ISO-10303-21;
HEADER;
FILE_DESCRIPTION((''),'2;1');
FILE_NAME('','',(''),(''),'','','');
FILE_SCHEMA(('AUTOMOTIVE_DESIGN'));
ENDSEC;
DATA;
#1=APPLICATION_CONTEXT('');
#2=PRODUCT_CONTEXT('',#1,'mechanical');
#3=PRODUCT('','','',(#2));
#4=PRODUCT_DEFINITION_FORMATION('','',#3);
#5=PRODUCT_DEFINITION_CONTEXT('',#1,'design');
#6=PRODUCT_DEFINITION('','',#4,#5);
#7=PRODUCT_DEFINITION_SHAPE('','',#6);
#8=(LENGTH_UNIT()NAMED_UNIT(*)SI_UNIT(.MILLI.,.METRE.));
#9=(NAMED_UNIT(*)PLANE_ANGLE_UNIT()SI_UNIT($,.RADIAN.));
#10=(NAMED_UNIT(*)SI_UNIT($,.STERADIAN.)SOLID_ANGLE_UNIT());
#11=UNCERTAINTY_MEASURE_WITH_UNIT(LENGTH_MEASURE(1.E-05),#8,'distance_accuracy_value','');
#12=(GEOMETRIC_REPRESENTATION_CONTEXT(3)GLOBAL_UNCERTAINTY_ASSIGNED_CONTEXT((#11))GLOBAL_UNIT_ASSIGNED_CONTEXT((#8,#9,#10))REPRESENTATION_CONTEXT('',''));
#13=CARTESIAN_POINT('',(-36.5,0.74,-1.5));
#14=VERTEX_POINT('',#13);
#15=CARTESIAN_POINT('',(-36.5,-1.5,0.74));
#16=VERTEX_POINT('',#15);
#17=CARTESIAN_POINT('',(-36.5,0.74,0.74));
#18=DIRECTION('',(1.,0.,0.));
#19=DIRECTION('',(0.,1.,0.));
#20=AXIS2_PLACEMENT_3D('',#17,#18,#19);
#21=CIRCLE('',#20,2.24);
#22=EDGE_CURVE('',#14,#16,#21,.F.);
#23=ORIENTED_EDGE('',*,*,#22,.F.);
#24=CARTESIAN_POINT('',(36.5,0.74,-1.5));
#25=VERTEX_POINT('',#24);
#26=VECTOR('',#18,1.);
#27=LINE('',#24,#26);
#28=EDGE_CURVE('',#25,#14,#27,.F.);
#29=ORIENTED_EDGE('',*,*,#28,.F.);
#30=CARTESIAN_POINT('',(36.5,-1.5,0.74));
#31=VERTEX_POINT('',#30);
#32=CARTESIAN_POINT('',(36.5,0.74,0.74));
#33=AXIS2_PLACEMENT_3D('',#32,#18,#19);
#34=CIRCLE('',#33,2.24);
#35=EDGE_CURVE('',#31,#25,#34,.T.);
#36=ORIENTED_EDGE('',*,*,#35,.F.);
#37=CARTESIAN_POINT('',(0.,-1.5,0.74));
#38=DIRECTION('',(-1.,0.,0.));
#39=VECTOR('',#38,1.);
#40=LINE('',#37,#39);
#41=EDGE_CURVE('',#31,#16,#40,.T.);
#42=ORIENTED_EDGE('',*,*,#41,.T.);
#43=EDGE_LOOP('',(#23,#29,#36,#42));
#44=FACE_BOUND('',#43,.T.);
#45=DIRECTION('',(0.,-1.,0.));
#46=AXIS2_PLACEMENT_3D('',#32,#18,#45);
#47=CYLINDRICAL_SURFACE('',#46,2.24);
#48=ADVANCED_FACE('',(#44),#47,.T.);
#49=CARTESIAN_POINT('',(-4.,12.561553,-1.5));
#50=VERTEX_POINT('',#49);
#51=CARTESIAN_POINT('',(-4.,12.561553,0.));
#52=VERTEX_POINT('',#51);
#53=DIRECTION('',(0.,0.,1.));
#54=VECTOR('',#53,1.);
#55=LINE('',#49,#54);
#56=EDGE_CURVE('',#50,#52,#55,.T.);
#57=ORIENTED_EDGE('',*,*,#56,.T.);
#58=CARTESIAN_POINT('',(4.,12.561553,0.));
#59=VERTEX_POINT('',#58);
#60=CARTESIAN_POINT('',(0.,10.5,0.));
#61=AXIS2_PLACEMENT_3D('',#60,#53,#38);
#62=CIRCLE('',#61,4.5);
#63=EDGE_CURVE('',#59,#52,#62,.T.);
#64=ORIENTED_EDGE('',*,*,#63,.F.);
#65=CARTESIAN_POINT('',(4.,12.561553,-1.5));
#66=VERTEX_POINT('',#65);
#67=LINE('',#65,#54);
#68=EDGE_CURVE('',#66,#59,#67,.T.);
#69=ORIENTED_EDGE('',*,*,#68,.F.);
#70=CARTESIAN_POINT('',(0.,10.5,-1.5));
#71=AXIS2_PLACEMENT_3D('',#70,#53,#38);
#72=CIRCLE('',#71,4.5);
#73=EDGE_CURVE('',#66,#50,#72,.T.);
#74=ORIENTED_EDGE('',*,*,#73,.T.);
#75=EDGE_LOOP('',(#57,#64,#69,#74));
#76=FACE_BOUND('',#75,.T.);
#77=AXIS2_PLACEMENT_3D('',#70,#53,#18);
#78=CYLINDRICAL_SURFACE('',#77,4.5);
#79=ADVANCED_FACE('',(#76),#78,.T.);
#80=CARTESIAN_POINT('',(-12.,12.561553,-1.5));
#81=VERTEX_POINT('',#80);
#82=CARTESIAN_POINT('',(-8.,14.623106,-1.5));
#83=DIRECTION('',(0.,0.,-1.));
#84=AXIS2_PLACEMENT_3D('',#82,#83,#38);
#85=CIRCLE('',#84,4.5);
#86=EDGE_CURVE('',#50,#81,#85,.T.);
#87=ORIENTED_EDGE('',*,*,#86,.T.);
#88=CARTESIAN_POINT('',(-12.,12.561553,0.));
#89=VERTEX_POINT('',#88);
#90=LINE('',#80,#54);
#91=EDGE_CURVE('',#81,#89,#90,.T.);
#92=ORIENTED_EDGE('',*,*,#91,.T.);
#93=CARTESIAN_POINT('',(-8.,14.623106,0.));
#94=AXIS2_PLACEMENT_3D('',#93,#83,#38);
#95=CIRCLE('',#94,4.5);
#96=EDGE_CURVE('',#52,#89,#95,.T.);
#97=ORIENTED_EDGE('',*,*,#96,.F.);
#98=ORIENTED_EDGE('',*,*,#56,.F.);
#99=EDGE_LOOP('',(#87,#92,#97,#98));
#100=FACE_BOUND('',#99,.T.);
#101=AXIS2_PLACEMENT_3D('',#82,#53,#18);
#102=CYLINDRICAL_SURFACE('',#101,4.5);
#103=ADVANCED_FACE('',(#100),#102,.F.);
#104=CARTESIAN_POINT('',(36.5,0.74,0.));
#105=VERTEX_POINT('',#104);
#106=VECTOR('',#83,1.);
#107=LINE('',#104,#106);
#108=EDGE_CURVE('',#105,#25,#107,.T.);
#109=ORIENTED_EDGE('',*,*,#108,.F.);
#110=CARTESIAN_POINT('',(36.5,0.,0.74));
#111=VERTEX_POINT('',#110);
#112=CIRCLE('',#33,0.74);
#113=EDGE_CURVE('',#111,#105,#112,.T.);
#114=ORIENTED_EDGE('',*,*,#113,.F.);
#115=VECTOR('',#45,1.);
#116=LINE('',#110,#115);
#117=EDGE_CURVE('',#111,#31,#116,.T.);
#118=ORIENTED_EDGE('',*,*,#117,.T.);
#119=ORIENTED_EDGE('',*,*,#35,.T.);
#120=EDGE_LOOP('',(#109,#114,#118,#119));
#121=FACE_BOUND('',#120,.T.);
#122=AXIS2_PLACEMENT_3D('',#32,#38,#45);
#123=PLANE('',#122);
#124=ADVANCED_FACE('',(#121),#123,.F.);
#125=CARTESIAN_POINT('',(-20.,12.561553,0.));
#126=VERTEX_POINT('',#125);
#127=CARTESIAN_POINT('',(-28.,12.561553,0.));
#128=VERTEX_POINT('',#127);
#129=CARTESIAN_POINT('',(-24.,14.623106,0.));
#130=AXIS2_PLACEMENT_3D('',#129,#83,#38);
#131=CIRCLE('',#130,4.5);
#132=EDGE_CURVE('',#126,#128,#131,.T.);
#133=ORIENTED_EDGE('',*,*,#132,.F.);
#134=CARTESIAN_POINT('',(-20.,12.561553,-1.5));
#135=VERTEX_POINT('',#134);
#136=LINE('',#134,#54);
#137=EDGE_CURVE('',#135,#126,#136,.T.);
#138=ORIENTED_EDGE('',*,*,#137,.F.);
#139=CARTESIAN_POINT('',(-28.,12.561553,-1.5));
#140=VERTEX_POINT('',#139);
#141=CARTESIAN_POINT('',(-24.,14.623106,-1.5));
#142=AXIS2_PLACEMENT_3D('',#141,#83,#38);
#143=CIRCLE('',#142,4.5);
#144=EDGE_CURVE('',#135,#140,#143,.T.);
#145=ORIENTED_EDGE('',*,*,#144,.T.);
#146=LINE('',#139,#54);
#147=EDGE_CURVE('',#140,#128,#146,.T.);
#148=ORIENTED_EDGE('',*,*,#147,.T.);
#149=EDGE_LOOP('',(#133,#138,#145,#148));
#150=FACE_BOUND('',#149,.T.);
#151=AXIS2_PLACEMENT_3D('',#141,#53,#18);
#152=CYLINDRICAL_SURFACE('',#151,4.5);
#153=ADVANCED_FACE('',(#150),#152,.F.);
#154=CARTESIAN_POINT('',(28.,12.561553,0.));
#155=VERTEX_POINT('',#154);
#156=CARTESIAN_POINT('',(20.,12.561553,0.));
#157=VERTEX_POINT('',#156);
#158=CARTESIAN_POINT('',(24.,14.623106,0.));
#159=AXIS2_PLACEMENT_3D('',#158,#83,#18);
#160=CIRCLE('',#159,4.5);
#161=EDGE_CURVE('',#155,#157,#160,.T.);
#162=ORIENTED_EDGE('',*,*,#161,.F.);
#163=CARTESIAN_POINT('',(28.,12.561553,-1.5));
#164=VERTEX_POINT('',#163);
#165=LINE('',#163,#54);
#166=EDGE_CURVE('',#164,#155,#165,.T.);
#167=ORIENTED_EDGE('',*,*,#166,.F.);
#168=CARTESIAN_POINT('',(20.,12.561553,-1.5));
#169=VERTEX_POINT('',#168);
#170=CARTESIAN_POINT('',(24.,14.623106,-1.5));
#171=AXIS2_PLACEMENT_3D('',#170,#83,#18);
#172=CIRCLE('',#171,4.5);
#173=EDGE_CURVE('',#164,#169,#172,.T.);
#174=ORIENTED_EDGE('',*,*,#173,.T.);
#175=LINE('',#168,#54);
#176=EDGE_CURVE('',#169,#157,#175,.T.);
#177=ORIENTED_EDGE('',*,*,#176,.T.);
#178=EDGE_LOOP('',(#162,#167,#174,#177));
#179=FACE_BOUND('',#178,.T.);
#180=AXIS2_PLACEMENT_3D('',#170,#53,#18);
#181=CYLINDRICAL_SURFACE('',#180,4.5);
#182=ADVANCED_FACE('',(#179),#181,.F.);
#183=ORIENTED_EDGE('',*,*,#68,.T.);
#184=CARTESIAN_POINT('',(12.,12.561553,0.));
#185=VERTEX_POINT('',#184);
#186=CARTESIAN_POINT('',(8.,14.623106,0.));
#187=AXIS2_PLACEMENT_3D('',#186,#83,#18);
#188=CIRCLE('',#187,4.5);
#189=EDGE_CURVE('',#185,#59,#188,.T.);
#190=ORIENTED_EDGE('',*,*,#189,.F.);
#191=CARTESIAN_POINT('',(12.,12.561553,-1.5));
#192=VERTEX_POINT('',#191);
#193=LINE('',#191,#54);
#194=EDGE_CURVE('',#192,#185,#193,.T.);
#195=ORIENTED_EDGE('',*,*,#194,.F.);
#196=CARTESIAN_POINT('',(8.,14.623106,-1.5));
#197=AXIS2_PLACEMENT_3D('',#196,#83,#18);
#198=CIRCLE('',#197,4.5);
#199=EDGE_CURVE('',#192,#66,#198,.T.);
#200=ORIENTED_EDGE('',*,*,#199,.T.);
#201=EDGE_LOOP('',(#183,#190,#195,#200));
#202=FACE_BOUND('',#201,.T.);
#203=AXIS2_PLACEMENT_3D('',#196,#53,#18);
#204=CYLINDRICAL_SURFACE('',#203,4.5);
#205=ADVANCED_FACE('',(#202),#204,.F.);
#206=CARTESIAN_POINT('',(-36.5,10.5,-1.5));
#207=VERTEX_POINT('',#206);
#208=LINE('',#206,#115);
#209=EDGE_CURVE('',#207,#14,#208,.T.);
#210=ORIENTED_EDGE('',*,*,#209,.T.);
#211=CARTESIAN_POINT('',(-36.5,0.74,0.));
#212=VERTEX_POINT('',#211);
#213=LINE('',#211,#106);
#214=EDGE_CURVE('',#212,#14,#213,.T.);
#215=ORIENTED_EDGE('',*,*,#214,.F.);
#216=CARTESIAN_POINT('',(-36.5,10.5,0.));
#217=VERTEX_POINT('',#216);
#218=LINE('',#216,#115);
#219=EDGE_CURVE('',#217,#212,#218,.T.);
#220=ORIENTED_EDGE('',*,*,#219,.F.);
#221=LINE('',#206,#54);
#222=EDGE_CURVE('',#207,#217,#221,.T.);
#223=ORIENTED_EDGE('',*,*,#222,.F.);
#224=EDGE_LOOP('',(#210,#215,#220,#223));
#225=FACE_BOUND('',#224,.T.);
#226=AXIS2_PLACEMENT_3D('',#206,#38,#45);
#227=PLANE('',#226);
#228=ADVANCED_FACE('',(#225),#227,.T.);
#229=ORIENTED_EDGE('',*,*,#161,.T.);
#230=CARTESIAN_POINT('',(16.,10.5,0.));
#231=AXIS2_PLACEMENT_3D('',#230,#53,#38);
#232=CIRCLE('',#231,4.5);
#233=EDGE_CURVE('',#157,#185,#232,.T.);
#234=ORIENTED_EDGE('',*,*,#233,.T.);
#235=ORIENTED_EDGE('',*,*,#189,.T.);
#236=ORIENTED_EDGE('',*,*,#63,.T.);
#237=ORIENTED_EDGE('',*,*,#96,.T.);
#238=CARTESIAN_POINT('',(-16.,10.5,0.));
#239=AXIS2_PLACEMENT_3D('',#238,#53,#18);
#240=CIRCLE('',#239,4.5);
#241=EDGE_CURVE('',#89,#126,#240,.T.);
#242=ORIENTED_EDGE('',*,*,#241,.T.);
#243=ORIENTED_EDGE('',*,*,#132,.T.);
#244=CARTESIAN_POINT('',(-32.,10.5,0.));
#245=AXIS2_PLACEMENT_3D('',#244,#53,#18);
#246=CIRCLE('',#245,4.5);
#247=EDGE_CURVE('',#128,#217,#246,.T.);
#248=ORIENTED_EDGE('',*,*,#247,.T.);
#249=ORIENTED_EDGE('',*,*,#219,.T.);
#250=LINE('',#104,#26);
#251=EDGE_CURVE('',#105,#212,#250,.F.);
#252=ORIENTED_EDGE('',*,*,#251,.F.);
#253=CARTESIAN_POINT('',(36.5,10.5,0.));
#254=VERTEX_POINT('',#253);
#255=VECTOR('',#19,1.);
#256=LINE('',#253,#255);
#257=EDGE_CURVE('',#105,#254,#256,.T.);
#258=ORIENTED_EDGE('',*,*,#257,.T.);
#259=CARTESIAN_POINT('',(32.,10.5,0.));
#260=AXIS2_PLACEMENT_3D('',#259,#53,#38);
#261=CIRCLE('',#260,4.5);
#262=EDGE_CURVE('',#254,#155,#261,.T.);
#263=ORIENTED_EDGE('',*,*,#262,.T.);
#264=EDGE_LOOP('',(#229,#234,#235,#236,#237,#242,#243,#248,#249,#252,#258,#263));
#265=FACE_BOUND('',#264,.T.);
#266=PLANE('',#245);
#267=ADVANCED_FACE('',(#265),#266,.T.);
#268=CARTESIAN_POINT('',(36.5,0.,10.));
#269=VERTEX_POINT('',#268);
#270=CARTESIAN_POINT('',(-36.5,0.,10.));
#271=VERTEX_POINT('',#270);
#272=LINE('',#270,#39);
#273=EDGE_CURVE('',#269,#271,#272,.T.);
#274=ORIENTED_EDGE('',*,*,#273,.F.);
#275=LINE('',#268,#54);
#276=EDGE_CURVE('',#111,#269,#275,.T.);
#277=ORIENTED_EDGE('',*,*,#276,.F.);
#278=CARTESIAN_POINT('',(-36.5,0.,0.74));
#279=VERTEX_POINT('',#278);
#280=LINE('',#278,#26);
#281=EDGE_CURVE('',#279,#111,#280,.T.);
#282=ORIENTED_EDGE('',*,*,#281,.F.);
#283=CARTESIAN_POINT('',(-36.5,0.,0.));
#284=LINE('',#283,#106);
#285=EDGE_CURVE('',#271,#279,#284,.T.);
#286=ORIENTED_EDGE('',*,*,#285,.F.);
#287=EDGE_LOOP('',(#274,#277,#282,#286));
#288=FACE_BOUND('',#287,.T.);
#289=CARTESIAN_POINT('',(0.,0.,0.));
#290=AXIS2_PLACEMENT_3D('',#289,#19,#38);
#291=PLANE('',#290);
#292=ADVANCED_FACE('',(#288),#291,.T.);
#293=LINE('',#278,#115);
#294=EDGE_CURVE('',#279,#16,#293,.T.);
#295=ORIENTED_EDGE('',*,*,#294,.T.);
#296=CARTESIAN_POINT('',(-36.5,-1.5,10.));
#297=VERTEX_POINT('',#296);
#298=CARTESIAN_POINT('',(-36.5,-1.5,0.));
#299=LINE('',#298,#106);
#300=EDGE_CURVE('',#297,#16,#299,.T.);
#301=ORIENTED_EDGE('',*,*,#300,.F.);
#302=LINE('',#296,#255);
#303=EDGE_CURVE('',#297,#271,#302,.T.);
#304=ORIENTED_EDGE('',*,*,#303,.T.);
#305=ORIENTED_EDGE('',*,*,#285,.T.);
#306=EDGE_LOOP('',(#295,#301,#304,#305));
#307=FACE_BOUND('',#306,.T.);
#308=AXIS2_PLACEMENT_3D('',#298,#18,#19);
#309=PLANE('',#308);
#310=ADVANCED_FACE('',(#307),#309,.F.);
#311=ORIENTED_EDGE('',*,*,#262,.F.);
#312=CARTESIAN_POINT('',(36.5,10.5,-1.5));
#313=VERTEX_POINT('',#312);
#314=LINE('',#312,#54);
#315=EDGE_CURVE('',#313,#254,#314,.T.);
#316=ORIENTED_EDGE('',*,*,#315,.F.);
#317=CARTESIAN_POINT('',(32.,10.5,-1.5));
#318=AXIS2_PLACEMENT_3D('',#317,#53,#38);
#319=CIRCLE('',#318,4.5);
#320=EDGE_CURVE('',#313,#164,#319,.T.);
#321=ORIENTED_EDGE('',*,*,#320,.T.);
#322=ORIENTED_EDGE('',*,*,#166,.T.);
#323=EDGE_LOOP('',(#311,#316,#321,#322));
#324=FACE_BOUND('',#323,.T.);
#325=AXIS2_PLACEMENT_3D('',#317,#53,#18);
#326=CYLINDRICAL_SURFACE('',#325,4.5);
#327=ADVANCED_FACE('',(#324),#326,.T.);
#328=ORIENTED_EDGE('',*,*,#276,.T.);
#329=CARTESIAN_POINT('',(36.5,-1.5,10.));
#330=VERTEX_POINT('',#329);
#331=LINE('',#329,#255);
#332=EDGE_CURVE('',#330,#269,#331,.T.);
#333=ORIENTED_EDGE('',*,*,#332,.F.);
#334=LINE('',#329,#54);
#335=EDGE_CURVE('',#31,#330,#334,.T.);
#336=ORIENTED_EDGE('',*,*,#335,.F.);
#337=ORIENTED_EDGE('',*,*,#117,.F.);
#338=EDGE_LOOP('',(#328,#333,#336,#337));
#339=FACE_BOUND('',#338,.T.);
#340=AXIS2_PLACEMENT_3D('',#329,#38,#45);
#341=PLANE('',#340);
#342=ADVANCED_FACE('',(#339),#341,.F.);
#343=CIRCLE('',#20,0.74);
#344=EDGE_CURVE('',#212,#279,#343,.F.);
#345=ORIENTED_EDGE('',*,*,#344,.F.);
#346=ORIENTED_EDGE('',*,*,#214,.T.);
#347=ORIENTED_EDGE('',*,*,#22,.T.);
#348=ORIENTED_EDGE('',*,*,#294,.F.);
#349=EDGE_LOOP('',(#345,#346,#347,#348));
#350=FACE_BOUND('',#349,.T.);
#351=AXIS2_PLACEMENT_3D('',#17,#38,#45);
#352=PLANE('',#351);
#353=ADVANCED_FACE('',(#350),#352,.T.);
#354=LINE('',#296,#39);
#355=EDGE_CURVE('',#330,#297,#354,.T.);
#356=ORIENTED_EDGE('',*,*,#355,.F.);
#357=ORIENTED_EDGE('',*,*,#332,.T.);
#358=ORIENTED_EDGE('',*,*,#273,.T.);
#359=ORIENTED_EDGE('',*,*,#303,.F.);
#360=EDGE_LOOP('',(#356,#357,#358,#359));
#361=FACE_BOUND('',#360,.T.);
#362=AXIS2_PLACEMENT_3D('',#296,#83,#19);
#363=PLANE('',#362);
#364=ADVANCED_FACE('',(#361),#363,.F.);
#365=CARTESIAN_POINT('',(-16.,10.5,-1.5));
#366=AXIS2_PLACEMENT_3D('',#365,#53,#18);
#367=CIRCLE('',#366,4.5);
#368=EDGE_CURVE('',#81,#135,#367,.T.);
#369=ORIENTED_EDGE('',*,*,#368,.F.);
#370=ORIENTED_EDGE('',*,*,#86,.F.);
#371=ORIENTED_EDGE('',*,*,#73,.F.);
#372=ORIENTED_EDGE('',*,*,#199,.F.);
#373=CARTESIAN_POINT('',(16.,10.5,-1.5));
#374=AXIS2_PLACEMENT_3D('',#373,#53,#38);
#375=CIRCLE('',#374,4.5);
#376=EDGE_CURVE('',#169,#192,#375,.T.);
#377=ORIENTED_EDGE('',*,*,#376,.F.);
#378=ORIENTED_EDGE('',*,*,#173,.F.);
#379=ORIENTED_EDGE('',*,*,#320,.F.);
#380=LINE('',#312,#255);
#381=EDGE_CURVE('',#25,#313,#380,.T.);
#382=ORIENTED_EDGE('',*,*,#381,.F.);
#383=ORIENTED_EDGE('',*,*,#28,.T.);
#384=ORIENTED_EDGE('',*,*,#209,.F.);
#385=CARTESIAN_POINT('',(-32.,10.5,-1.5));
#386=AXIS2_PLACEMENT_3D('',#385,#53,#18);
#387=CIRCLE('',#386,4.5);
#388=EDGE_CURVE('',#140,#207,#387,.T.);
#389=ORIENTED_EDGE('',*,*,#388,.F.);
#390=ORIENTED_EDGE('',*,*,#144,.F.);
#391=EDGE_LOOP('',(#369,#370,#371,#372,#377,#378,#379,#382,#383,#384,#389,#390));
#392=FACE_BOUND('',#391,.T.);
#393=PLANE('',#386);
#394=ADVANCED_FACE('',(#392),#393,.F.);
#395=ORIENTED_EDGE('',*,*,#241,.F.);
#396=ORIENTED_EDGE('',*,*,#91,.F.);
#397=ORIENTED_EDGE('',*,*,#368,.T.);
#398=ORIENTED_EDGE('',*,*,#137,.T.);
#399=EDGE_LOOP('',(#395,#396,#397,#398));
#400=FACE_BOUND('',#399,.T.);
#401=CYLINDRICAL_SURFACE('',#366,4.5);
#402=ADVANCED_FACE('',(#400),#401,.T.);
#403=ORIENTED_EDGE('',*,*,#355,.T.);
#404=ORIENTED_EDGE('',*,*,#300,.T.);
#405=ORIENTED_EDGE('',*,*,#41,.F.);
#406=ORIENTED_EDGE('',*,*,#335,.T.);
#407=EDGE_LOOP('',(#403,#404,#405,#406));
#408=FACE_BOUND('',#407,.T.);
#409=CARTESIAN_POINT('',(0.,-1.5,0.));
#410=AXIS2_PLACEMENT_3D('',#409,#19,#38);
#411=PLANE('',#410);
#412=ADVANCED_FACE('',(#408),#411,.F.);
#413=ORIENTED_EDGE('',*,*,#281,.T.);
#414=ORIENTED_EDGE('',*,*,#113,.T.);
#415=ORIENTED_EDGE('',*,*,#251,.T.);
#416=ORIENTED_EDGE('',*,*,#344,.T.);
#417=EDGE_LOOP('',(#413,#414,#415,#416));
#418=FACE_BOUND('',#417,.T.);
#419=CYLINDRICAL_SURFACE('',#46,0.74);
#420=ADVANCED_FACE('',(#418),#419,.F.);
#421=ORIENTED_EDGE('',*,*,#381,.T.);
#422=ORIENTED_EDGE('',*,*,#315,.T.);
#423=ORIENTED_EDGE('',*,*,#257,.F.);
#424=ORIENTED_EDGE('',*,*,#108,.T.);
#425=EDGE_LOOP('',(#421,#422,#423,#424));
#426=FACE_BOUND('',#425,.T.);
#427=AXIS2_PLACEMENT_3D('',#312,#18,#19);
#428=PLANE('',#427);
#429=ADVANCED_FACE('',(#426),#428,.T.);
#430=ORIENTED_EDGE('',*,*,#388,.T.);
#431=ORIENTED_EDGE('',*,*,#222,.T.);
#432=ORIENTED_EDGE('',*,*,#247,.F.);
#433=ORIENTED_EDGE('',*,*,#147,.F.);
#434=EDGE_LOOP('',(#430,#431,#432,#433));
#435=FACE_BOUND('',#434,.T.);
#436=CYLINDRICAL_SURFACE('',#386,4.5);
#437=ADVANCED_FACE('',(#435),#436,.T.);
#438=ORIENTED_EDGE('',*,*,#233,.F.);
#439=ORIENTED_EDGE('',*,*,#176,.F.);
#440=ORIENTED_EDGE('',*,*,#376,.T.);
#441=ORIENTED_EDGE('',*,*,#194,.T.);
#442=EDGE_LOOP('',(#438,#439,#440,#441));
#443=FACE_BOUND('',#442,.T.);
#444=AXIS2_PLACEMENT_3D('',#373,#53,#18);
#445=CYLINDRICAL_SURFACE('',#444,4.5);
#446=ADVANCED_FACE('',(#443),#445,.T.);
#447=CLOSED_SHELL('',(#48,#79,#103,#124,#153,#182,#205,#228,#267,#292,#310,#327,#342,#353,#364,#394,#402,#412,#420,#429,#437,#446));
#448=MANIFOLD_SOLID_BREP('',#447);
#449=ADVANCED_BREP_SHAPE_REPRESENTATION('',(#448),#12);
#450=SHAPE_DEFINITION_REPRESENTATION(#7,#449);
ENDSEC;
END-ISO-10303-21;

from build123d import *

# Parameters (mm, degrees)
SM_BASE_FLANGE_1_DEPTH           = 1.5
SM_EDGE_FLANGE_1_STRIP_W         = 7.48
SM_EDGE_FLANGE_1_STRIP_H         = 1.5
SM_EDGE_FLANGE_1_STRIP_CUT_DEPTH = 73
SM_EDGE_FLANGE_1_DEPTH           = 73


# Sheet-metal steps are written as plain solids
with BuildPart() as part:
    # Sketch 1 → Базовая кромка1 (new body)
    with BuildSketch(Plane.XY):
        with BuildLine():
            Line((-36.5, 0), (36.5, 0))
            Line((36.5, 0), (36.5, 10.5))
            ThreePointArc((36.5, 10.5), (33.060660172, 14.873213921), (28, 12.561552813))
            ThreePointArc((28, 12.561552813), (24, 10.123105626), (20, 12.561552813))
            ThreePointArc((20, 12.561552813), (16, 15), (12, 12.561552813))
            ThreePointArc((12, 12.561552813), (8, 10.123105626), (4, 12.561552813))
            ThreePointArc((4, 12.561552813), (0, 15), (-4, 12.561552813))
            ThreePointArc((-4, 12.561552813), (-8, 10.123105626), (-12, 12.561552813))
            ThreePointArc((-12, 12.561552813), (-16, 15), (-20, 12.561552813))
            ThreePointArc((-20, 12.561552813), (-24, 10.123105626), (-28, 12.561552813))
            ThreePointArc((-28, 12.561552813), (-33.060660172, 14.873213921), (-36.5, 10.5))
            Line((-36.5, 10.5), (-36.5, 0))
        make_face()
    extrude(amount=-SM_BASE_FLANGE_1_DEPTH)

    # Ребро-кромка1 strip (across the edge) → Ребро-кромка1 strip cut (cut)
    with BuildSketch(Plane.YZ.offset(-36.5)):
        with Locations((-3, -0.75)):
            Rectangle(SM_EDGE_FLANGE_1_STRIP_W, SM_EDGE_FLANGE_1_STRIP_H)
    extrude(amount=SM_EDGE_FLANGE_1_STRIP_CUT_DEPTH, mode=Mode.SUBTRACT)

    # Ребро-кромка1 section (across the edge) → Ребро-кромка1 (add)
    with BuildSketch(Plane.YZ.offset(-36.5)):
        with BuildLine():
            Line((-1.5, 0.74), (-1.5, 10))
            Line((-1.5, 10), (0, 10))
            Line((0, 10), (0, 0.74))
            ThreePointArc((0, 0.74), (0.216740982, 0.216740982), (0.74, 0))
            Line((0.74, 0), (0.74, -1.5))
            ThreePointArc((0.74, -1.5), (-0.84391919, -0.84391919), (-1.5, 0.74))
        make_face()
    extrude(amount=SM_EDGE_FLANGE_1_DEPTH)


solid = part.part
